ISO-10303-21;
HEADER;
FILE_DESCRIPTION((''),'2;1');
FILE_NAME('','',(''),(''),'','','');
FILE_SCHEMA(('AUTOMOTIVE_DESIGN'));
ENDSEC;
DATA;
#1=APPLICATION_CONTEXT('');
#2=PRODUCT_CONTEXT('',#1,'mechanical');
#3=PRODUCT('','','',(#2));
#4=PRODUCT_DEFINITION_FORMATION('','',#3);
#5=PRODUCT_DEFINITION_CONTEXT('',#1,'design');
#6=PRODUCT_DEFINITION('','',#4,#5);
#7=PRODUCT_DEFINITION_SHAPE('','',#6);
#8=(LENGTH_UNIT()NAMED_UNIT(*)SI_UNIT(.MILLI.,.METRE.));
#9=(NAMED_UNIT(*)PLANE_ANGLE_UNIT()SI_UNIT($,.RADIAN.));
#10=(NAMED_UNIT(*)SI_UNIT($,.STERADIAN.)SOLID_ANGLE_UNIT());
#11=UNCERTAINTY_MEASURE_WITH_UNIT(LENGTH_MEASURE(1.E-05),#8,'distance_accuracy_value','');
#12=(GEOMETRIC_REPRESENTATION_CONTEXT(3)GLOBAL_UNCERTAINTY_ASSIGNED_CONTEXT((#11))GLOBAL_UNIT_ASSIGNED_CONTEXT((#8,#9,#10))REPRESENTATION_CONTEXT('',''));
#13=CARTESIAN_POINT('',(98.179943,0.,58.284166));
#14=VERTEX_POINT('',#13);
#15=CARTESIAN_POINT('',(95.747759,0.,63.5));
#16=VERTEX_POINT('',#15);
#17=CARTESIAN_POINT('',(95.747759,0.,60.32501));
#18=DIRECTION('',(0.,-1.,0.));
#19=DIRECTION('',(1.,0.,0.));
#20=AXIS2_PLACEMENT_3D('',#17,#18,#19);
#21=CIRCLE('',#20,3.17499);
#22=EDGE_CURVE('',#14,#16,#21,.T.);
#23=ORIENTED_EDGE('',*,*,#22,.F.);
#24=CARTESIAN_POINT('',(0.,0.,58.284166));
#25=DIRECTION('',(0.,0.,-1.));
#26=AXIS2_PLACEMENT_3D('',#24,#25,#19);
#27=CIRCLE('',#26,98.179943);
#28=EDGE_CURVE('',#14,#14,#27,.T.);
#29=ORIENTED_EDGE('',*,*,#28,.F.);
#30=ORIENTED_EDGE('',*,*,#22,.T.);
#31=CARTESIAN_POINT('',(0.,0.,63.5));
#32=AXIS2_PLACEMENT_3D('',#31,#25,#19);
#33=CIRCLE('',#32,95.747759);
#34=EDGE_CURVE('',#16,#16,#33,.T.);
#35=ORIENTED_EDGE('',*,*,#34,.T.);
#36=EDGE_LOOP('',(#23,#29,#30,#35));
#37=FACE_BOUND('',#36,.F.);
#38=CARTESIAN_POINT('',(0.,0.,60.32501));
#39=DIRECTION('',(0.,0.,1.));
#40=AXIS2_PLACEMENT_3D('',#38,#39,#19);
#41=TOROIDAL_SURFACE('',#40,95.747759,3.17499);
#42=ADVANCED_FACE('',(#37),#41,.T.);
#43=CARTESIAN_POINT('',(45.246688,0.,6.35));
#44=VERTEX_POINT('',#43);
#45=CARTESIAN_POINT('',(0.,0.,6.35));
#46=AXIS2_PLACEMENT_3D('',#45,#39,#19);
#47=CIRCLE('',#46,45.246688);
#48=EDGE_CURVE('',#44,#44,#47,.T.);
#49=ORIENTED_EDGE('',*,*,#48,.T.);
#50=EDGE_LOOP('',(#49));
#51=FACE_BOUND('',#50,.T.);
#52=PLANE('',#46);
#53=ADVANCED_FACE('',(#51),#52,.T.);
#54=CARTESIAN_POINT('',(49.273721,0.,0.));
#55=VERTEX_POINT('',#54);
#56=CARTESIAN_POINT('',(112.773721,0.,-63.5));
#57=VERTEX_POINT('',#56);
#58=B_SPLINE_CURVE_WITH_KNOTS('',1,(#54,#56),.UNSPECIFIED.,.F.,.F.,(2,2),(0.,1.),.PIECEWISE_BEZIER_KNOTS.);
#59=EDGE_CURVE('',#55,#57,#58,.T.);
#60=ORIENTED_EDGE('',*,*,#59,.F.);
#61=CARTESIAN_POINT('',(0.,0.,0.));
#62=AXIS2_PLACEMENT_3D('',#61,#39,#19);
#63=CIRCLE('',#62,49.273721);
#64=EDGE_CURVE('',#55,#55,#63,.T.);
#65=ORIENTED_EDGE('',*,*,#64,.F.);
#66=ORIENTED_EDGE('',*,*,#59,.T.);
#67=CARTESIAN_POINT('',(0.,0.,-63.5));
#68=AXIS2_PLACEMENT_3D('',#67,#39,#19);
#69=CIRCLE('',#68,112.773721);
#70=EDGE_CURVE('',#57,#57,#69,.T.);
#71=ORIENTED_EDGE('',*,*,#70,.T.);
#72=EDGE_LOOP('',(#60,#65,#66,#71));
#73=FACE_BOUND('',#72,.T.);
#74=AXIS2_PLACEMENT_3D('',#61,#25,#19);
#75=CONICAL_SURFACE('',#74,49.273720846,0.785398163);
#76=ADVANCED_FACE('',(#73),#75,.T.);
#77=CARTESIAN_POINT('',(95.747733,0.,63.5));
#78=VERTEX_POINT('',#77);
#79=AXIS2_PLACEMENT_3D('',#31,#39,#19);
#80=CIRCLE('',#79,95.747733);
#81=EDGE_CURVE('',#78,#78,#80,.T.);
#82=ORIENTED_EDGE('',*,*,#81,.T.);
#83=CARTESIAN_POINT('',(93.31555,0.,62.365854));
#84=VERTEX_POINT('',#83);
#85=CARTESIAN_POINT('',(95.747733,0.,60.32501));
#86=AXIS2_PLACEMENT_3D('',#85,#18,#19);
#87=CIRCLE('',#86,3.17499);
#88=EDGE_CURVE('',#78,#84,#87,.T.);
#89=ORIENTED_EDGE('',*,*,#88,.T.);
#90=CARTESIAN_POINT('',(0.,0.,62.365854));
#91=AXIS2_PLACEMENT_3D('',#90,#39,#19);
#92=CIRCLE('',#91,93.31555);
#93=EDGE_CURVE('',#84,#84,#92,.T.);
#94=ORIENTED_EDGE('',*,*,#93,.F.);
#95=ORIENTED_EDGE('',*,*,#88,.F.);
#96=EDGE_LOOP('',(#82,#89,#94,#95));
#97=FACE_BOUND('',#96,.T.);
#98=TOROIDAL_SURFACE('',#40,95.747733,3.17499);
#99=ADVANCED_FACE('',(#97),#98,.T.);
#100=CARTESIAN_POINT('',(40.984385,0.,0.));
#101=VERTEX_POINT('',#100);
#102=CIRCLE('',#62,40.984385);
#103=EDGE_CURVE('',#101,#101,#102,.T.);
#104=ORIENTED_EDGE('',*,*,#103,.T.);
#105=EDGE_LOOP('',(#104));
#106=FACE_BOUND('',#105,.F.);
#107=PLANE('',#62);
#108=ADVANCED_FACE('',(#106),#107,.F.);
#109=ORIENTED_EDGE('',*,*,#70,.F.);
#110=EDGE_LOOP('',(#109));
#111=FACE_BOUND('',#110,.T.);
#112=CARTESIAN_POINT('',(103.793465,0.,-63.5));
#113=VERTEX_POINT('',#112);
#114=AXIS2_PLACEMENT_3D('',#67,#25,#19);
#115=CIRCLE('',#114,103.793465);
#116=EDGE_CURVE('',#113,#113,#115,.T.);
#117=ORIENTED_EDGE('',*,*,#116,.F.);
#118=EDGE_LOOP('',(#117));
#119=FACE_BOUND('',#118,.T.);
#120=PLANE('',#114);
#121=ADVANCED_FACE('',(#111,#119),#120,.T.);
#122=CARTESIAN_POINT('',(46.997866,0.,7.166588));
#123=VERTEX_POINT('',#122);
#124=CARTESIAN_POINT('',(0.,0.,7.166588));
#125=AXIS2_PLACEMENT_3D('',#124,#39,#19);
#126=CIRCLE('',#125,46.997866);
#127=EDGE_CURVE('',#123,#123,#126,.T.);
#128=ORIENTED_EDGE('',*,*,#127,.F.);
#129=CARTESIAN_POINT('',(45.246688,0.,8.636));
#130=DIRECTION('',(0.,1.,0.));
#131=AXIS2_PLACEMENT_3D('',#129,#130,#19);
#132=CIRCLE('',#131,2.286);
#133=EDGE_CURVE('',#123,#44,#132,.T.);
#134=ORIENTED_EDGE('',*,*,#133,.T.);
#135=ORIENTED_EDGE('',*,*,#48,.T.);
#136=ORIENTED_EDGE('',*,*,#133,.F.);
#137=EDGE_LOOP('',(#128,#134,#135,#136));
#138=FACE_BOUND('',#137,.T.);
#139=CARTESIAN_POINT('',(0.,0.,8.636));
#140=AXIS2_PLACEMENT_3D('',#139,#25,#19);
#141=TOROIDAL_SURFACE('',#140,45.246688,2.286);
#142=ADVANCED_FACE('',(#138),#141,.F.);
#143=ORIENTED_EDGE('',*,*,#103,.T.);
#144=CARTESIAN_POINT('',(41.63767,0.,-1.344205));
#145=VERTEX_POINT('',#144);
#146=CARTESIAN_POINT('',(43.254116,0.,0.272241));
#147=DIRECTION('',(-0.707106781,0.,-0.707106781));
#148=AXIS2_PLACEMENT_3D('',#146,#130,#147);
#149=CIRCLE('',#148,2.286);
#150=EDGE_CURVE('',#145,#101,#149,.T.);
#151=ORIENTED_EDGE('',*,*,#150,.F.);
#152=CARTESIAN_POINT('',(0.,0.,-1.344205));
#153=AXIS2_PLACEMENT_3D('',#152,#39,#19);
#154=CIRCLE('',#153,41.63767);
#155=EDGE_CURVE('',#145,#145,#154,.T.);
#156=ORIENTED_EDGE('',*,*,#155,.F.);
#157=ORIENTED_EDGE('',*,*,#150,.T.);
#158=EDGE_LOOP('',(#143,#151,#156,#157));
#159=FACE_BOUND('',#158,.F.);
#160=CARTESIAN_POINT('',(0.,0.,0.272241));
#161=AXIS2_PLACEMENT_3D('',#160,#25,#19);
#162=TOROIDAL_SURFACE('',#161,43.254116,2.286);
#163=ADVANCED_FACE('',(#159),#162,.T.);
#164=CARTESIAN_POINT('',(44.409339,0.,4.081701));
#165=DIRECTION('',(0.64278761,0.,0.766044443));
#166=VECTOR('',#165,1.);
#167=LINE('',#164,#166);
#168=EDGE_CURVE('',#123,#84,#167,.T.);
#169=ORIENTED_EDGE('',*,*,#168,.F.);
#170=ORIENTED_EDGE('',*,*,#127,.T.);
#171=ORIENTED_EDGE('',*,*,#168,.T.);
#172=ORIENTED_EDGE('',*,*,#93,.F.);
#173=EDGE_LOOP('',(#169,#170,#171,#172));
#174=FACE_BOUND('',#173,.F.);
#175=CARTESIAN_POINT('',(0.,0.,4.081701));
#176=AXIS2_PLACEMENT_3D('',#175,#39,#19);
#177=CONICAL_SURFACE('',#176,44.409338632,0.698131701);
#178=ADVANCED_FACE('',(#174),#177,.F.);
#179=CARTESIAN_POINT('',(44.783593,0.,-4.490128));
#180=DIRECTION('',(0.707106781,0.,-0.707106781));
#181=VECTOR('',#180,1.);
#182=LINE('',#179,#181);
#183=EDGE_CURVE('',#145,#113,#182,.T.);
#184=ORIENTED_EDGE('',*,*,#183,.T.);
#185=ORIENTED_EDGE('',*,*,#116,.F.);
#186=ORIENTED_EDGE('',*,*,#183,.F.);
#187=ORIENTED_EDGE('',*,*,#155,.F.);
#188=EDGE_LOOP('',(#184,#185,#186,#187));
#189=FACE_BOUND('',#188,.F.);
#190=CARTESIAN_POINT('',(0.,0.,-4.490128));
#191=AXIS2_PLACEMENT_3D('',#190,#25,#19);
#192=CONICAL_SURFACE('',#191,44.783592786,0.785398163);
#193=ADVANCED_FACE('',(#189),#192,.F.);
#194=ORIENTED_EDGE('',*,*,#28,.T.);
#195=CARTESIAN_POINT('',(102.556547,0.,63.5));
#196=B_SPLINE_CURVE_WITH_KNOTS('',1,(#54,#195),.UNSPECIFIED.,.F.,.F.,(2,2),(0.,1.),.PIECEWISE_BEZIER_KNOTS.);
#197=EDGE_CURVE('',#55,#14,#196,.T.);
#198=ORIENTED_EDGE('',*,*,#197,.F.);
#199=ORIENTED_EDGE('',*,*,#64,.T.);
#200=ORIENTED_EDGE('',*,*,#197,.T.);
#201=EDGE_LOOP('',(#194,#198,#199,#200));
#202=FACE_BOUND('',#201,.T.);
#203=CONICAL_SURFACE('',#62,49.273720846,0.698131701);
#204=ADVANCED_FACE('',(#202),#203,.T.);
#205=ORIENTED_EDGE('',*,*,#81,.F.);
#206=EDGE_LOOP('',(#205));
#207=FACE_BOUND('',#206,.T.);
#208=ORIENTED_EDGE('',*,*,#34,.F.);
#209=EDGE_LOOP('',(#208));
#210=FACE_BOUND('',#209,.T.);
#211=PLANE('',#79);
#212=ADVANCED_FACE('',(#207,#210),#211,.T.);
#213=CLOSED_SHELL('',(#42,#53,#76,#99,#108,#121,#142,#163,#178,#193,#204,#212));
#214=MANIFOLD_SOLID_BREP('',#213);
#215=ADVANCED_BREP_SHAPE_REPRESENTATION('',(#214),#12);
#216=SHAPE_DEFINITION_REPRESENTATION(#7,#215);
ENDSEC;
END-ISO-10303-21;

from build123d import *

# Parameters (mm, degrees)
F0_R      = 49.2737208463
F1_DEPTH  = 63.5
F1_TAPER  = -40
F2_T      = -6.35
F3_R      = 3.17499
F1_FACE_R = 49.2737208463
F4_DEPTH  = 63.5
F4_TAPER  = -45
F5_T      = -6.35
F6_R      = 2.286


# Not quite as in the source:
# - a fillet or chamfer that OpenCascade refuses, or shapes differently, is made with other operations: its cross-section is extruded or revolved along the edge and cut away or added
# - a fillet or chamfer is up to 0.001 mm smaller than in the source, because OpenCascade refuses the exact size


with BuildPart() as f1:
    # F0 (on Top) → F1 (new body)
    with BuildSketch(Plane.XY):
        Circle(F0_R)
    extrude(amount=F1_DEPTH, taper=F1_TAPER)

    # F2
    f2_openings = [f1.faces().sort_by_distance(p)[0] for p in [
        (0, 0, 63.5),
    ]]
    offset(amount=F2_T, openings=f2_openings, kind=Kind.INTERSECTION)

    # F3 (radius 3.175 in the source; OpenCascade refuses exactly that, so slightly less here)
    f3_edges = [f1.edges().sort_by_distance(p)[0] for p in [
        (-102.556547, 0, 63.5),
        (-94.267211, 0, 63.5),
    ]]
    fillet(f3_edges, radius=F3_R)

    # F1_face (on face) → F4 (join)
    with BuildSketch(Plane(origin=(0, 0, 0), x_dir=(1, 0, 0), z_dir=(0, 0, -1))):
        Circle(F1_FACE_R)
    extrude(amount=F4_DEPTH, taper=F4_TAPER)

    # F5
    f5_openings = [f1.faces().sort_by_distance(p)[0] for p in [
        (0, 0, -63.5),
    ]]
    offset(amount=F5_T, openings=f5_openings, kind=Kind.INTERSECTION)

    # F6
    f6_edges = [f1.edges().sort_by_distance(p)[0] for p in [
        (-46.312667, 0, 6.35),
    ]]
    fillet(f6_edges, radius=F6_R)

    # F7: fillet of radius 2.286 on 1 edges, made by hand

    # F7_s1 → F7_t2 (revolve, cut)
    with BuildSketch(Plane.XZ):
        with BuildLine():
            ThreePointArc((41.6376699139, -1.3442051886), (41.1980722658, -0.7269988473), (40.984384559, 0))
            Line((40.984384559, 0), (40.6691484685, -0.3756837433))
            Line((40.6691484685, -0.3756837433), (41.6376699139, -1.3442051886))
        make_face()
    revolve(axis=Axis((0, 0, -0.3756837433), (0, 0, 1)), mode=Mode.SUBTRACT)


solid = f1.part
